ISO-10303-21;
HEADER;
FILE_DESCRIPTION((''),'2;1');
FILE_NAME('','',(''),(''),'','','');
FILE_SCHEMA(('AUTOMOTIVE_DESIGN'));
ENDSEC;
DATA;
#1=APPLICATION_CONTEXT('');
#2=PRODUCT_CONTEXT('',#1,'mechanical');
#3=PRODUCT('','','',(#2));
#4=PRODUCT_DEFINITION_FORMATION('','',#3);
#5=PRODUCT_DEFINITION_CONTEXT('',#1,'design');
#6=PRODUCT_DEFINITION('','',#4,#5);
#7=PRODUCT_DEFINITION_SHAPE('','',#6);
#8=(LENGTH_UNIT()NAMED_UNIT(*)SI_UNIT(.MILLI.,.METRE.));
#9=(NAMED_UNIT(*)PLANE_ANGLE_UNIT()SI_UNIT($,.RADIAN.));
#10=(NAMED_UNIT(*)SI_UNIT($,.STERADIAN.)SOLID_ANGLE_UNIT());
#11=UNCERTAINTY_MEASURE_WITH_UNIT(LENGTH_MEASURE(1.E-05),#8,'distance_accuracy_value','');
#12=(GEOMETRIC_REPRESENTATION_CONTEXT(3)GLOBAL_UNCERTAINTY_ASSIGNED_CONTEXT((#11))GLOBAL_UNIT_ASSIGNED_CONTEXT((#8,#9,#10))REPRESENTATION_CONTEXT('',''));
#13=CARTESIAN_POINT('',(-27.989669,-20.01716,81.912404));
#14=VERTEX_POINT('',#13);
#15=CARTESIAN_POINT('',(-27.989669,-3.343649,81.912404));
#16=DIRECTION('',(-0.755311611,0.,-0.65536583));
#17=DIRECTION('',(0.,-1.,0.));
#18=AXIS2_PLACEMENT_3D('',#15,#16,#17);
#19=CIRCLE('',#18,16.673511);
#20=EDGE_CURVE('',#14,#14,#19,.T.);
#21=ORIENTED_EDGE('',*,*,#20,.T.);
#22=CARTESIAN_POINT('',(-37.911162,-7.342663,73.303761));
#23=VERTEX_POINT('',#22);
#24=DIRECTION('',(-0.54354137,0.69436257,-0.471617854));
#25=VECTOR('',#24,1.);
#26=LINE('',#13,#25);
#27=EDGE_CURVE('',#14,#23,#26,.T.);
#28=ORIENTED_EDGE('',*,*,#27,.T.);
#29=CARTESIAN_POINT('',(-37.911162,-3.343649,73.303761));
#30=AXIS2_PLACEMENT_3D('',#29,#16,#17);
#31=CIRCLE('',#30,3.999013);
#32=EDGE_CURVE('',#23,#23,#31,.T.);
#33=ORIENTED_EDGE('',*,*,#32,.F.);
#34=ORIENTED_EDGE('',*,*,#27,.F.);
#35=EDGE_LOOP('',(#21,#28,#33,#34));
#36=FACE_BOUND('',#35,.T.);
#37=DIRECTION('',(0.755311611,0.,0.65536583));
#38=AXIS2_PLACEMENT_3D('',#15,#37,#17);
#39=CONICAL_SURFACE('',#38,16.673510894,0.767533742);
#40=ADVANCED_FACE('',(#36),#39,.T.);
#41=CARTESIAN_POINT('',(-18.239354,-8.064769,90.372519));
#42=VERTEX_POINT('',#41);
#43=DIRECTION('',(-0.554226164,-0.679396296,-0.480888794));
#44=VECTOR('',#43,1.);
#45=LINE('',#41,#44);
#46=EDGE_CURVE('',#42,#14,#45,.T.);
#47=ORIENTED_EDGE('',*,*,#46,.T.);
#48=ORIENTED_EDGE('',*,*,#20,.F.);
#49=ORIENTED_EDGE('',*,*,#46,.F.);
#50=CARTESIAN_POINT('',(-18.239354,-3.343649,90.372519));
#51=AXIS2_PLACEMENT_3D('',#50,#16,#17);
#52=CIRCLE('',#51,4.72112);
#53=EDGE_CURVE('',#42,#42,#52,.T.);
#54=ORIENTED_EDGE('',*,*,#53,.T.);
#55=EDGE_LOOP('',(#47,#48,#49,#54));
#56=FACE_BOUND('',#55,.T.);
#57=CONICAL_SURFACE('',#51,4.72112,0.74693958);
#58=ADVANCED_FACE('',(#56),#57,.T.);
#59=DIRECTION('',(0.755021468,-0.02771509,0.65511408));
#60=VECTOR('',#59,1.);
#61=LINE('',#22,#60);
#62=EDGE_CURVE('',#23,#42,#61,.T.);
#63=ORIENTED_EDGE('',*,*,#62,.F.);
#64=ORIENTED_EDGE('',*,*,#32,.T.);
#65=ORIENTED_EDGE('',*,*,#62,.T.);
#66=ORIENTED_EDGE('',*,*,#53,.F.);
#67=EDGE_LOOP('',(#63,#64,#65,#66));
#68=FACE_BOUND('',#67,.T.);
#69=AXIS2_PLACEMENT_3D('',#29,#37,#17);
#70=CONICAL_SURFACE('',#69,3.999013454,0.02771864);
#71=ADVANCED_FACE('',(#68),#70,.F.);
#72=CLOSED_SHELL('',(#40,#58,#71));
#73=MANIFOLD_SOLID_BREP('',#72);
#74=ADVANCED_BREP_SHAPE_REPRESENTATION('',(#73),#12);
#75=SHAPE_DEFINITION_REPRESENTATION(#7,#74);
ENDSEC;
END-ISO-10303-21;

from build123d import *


with BuildPart() as f3:
    # F2 (on face) → F3 (revolve)
    with BuildSketch(Plane(origin=(-52.5687690169, 0, 60.5857061802), x_dir=(0.7553116107, 0, 0.6553658297), z_dir=(0.6553658297, 0, -0.7553116107))):
        Polygon((45.4506650567, 8.0647692084), (32.541668759, 20.0171601027), (19.4060392678, 7.3426626623), align=None)
    revolve(axis=Axis((-26.4949759178, -3.3436492085, 83.2093131865), (-0.7553116107, 0, -0.6553658297)))


solid = f3.part
